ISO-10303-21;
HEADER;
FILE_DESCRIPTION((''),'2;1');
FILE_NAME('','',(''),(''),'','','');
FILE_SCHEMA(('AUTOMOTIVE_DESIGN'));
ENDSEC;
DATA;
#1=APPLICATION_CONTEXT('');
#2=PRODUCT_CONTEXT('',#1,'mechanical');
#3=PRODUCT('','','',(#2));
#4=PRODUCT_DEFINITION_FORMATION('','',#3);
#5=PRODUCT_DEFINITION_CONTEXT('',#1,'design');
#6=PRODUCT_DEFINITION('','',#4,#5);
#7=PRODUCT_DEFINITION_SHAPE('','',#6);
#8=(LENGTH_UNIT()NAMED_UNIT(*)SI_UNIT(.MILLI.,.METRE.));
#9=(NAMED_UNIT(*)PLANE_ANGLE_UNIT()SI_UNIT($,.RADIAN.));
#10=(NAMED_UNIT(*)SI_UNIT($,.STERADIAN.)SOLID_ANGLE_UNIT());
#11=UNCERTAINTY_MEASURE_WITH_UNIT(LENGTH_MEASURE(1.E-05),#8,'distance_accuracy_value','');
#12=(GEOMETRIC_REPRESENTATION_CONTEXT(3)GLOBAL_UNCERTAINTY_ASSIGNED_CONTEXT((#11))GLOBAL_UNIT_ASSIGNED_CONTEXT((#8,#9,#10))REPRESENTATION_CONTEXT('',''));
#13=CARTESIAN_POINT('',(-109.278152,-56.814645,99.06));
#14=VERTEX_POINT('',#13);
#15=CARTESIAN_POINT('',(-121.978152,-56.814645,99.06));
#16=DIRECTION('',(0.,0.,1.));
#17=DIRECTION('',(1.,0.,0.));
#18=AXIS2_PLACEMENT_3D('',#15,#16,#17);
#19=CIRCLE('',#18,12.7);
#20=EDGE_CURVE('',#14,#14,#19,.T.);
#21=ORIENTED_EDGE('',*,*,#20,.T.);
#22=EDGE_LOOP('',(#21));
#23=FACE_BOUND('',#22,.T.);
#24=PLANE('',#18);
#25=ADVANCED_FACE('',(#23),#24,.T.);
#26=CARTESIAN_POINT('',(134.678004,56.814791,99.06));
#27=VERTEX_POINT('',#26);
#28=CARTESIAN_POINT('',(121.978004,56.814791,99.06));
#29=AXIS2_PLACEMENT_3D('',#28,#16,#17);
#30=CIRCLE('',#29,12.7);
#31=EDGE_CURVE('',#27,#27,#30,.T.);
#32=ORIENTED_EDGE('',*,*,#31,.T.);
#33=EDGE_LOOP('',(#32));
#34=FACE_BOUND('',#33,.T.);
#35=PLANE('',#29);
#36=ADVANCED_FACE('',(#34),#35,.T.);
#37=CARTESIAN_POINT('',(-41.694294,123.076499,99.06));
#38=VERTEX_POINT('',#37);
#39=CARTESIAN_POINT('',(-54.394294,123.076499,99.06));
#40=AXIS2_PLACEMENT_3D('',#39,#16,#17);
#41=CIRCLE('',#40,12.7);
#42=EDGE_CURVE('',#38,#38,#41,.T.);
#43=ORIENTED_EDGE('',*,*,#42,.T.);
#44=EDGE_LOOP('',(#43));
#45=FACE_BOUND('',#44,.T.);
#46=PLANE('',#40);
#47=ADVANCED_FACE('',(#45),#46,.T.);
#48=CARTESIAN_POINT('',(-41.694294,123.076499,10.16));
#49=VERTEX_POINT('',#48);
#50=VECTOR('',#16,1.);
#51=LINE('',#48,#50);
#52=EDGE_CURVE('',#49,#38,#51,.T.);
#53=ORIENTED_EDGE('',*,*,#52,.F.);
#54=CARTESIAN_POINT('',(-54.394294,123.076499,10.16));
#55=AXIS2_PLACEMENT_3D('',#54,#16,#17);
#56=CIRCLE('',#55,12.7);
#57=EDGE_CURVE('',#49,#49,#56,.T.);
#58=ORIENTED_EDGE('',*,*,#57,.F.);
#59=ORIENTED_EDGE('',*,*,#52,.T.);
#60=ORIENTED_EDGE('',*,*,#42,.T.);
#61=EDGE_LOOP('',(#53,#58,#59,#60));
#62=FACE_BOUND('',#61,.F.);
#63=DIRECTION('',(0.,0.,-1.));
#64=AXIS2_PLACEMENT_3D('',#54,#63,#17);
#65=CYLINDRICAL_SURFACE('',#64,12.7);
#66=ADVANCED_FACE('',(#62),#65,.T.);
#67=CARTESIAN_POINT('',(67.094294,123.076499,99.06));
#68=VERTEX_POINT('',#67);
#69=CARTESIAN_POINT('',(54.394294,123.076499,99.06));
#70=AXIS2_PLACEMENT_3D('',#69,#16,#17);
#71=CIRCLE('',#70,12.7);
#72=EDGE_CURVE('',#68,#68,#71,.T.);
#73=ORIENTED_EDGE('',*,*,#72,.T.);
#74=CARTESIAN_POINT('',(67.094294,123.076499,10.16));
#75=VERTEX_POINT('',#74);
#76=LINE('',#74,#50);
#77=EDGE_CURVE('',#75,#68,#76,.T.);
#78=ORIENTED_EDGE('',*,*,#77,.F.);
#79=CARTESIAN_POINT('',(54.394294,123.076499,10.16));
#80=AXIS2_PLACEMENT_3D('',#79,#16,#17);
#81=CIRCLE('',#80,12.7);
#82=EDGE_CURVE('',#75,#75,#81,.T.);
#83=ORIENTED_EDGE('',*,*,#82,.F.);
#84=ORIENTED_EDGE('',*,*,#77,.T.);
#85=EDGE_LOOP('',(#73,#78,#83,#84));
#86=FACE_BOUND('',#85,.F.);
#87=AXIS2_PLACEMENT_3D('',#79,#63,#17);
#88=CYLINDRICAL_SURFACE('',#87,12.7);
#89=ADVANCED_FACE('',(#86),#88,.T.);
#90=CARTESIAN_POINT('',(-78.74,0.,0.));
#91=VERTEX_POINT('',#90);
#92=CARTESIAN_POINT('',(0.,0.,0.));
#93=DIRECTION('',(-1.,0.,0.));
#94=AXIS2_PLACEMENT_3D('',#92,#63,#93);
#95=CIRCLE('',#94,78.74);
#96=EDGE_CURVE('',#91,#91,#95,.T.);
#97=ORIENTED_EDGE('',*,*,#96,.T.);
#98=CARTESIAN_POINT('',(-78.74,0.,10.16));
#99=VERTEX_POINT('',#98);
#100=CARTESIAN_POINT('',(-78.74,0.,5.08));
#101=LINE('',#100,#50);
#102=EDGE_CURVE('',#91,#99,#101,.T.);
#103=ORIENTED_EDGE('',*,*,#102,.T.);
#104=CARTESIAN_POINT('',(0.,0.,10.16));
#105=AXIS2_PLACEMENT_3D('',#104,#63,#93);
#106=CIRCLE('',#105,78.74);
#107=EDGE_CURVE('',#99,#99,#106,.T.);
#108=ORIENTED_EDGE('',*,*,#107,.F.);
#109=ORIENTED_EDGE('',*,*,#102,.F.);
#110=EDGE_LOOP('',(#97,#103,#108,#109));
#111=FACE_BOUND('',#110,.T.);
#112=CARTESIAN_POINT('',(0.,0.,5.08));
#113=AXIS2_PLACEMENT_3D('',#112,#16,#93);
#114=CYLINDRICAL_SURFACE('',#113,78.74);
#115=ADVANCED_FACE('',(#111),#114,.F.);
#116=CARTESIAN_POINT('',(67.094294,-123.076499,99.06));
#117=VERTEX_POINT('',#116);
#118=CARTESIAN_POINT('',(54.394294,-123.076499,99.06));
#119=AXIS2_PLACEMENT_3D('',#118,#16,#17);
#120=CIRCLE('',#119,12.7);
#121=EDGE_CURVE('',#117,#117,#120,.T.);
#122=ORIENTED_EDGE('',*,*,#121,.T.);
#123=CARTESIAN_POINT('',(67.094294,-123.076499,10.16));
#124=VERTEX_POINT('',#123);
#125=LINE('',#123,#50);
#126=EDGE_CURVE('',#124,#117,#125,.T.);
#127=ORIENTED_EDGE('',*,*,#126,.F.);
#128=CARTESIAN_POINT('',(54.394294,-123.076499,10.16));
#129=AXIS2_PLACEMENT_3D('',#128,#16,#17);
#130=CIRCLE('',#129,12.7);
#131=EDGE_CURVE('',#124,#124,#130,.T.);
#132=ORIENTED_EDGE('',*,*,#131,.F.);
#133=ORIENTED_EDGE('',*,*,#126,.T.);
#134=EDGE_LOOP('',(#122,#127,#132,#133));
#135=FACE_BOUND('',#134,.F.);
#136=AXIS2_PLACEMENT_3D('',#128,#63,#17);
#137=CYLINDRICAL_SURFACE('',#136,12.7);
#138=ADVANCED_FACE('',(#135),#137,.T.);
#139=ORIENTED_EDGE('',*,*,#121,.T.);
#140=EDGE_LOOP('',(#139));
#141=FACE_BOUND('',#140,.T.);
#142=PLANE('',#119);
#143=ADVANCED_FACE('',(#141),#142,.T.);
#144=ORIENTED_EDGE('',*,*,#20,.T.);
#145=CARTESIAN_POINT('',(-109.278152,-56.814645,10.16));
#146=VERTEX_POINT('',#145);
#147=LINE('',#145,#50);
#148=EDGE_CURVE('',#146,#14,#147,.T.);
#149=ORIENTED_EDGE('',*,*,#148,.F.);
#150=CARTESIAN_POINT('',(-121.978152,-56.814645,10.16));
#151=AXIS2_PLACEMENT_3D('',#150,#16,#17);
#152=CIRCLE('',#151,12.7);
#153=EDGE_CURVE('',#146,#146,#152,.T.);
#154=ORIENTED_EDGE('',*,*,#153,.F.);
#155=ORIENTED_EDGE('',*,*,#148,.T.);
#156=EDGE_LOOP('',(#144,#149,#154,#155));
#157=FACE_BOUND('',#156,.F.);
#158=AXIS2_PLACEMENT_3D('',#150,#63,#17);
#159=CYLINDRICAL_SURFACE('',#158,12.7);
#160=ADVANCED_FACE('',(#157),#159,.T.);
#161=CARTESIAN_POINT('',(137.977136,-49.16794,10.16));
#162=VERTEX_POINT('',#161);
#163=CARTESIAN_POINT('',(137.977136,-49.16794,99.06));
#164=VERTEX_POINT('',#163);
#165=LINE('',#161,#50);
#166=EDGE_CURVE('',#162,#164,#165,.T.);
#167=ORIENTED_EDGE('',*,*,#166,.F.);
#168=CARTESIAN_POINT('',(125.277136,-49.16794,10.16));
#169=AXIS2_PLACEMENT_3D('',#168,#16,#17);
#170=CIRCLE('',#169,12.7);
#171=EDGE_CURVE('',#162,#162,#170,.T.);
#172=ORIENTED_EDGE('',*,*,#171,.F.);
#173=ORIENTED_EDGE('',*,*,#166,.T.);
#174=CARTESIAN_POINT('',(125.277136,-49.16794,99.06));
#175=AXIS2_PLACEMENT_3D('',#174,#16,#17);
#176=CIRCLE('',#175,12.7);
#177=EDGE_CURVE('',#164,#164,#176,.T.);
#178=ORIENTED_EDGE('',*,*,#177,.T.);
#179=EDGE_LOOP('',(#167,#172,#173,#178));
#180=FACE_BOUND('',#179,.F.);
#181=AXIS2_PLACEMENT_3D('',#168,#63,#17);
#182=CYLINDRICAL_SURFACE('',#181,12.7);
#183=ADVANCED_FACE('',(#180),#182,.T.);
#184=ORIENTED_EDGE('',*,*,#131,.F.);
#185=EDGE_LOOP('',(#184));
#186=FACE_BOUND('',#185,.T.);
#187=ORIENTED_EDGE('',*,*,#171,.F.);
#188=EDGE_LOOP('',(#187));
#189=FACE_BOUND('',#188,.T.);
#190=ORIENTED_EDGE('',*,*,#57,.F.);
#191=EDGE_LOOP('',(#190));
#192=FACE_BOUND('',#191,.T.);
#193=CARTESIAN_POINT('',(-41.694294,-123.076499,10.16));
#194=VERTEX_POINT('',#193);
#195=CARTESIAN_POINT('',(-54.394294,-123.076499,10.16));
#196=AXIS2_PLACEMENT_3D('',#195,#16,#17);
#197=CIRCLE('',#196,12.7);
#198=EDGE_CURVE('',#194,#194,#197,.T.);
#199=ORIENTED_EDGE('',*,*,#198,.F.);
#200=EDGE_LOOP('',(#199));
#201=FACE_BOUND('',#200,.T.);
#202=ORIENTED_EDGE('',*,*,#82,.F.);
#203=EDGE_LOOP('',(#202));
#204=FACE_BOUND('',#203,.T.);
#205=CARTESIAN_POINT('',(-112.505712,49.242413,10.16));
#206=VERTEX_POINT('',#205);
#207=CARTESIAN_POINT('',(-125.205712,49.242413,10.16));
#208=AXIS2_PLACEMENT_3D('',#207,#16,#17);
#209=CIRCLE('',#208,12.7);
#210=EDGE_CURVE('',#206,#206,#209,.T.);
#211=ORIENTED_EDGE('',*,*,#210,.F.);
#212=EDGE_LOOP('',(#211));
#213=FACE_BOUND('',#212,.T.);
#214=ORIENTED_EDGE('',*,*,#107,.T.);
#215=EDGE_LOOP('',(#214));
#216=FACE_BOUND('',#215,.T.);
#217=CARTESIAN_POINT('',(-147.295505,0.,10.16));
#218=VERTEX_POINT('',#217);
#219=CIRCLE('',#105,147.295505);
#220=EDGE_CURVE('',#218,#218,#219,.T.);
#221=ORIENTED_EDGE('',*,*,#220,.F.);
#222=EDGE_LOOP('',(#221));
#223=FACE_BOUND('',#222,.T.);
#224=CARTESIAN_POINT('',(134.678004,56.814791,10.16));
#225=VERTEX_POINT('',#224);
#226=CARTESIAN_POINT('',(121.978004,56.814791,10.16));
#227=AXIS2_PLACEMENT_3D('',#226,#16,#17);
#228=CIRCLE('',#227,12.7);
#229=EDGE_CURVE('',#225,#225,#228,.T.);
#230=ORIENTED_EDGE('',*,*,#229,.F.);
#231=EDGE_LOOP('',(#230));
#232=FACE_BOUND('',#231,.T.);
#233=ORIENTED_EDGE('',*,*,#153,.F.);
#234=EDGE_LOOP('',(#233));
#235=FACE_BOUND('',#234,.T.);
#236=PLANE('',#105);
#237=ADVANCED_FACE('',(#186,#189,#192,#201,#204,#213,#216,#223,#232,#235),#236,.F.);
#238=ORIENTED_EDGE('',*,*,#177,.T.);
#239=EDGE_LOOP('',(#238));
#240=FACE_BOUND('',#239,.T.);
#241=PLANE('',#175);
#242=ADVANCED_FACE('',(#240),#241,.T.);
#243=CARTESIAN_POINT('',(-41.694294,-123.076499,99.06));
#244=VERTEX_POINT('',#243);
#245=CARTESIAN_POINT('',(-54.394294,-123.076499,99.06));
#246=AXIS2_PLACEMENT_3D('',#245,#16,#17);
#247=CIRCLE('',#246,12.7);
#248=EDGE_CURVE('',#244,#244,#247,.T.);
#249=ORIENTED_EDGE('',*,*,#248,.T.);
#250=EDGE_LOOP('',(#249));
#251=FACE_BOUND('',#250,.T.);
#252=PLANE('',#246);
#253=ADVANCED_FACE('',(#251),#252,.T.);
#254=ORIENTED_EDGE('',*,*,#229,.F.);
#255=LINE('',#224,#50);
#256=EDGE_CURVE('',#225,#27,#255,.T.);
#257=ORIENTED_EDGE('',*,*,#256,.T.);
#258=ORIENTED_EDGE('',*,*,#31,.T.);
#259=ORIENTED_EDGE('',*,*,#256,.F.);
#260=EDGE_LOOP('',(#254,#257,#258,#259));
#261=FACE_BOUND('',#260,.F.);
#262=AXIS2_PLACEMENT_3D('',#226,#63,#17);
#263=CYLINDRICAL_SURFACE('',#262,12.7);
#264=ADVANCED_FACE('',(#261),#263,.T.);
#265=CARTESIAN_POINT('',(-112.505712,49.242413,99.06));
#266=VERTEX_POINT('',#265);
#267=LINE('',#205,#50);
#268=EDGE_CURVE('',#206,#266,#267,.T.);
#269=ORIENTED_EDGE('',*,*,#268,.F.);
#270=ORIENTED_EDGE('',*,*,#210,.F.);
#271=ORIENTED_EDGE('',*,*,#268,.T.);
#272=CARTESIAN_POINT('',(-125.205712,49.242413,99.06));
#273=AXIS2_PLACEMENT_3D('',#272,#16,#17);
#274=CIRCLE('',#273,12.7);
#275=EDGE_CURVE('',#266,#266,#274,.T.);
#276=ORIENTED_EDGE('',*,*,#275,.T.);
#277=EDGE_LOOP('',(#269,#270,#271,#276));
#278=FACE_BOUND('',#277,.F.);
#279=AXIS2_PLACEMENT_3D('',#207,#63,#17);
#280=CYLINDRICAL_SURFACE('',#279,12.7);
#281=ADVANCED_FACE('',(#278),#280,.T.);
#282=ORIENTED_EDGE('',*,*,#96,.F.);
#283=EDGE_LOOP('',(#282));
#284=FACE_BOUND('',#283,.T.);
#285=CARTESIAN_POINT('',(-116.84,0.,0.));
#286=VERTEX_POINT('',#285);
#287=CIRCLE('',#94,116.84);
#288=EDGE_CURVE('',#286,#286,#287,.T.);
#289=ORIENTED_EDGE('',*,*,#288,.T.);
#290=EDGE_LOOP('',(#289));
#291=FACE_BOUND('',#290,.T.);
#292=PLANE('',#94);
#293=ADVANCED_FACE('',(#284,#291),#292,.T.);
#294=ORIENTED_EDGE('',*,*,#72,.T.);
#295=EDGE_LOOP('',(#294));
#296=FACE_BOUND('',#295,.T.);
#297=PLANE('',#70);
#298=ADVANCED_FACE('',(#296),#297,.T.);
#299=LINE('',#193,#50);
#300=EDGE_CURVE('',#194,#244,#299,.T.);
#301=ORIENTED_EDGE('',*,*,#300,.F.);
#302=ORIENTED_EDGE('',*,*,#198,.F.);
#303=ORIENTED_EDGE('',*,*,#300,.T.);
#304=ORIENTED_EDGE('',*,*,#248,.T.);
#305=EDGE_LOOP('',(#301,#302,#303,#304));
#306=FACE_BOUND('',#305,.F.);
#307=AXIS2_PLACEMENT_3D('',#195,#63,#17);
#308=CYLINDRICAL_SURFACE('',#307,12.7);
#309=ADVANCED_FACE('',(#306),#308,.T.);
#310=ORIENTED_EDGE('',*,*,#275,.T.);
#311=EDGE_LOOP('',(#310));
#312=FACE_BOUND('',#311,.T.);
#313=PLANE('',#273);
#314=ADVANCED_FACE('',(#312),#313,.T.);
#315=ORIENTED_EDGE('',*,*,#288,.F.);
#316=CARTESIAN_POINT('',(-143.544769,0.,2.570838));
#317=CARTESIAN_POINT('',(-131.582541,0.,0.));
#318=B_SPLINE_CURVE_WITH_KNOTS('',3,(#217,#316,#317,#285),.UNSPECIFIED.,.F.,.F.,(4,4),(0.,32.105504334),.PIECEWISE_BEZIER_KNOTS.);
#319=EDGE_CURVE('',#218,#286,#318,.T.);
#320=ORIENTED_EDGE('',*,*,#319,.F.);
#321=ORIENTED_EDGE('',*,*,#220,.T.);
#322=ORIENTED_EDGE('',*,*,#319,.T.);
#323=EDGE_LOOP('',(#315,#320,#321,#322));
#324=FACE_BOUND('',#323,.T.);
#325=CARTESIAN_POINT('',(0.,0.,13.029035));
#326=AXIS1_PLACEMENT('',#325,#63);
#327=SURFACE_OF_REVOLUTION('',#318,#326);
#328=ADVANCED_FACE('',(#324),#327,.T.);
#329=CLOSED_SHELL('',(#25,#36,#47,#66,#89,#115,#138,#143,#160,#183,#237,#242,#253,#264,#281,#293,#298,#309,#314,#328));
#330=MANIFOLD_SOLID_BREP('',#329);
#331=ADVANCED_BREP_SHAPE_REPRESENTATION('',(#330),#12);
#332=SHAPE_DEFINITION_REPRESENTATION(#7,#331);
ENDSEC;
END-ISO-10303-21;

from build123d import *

# Parameters (mm, degrees)
F0_W     = 38.1
F0_H     = 10.16
F2_R     = 12.7
F3_DEPTH = 88.9
F4_DEPTH = 88.9


# Not quite as in the source:
# - a feature names something its author has since deleted; it is built from what else it names


with BuildPart() as f1:
    # F0 (on Front) → F1 (revolve)
    with BuildSketch(Plane.XZ):
        with BuildLine():
            add(Edge.make_bspline(
                [(-147.2955053902, 10.16), (-143.5447688246, 2.570837969), (-131.58254077, 0), (-116.84, 0)],
                knots=[0, 0, 0, 0, 32.1055043345, 32.1055043345, 32.1055043345, 32.1055043345], degree=3))
            Line((-116.84, 0), (-116.84, 10.16))
            Line((-116.84, 10.16), (-147.2955053902, 10.16))
        make_face()
        with Locations((-97.79, 5.08)):
            Rectangle(F0_W, F0_H)
    revolve(axis=Axis((0, 0, 13.0290351808), (0, 0, -1)))

    # F2 (on face) → F3 (join)
    with BuildSketch(Plane.XY.offset(10.16)):
        with Locations((-54.3942935765, 123.0764985085)):
            Circle(F2_R)
        with Locations((54.3942935765, 123.0764985085)):
            Circle(F2_R)
        with Locations((121.978003574, 56.8147908631)):
            Circle(F2_R)
        with Locations((125.2771361136, -49.1679397622)):
            Circle(F2_R)
        with Locations((54.3942935765, -123.0764985085)):
            Circle(F2_R)
        with Locations((-54.3942935765, -123.0764985085)):
            Circle(F2_R)
        with Locations((-121.9781520783, -56.8146452636)):
            Circle(F2_R)
    extrude(amount=F3_DEPTH)

    # F2 (on face) → F4 (join)
    with BuildSketch(Plane.XY.offset(10.16)):
        with Locations((-125.2057118813, 49.2424128206)):
            Circle(F2_R)
    extrude(amount=F4_DEPTH)


solid = f1.part
